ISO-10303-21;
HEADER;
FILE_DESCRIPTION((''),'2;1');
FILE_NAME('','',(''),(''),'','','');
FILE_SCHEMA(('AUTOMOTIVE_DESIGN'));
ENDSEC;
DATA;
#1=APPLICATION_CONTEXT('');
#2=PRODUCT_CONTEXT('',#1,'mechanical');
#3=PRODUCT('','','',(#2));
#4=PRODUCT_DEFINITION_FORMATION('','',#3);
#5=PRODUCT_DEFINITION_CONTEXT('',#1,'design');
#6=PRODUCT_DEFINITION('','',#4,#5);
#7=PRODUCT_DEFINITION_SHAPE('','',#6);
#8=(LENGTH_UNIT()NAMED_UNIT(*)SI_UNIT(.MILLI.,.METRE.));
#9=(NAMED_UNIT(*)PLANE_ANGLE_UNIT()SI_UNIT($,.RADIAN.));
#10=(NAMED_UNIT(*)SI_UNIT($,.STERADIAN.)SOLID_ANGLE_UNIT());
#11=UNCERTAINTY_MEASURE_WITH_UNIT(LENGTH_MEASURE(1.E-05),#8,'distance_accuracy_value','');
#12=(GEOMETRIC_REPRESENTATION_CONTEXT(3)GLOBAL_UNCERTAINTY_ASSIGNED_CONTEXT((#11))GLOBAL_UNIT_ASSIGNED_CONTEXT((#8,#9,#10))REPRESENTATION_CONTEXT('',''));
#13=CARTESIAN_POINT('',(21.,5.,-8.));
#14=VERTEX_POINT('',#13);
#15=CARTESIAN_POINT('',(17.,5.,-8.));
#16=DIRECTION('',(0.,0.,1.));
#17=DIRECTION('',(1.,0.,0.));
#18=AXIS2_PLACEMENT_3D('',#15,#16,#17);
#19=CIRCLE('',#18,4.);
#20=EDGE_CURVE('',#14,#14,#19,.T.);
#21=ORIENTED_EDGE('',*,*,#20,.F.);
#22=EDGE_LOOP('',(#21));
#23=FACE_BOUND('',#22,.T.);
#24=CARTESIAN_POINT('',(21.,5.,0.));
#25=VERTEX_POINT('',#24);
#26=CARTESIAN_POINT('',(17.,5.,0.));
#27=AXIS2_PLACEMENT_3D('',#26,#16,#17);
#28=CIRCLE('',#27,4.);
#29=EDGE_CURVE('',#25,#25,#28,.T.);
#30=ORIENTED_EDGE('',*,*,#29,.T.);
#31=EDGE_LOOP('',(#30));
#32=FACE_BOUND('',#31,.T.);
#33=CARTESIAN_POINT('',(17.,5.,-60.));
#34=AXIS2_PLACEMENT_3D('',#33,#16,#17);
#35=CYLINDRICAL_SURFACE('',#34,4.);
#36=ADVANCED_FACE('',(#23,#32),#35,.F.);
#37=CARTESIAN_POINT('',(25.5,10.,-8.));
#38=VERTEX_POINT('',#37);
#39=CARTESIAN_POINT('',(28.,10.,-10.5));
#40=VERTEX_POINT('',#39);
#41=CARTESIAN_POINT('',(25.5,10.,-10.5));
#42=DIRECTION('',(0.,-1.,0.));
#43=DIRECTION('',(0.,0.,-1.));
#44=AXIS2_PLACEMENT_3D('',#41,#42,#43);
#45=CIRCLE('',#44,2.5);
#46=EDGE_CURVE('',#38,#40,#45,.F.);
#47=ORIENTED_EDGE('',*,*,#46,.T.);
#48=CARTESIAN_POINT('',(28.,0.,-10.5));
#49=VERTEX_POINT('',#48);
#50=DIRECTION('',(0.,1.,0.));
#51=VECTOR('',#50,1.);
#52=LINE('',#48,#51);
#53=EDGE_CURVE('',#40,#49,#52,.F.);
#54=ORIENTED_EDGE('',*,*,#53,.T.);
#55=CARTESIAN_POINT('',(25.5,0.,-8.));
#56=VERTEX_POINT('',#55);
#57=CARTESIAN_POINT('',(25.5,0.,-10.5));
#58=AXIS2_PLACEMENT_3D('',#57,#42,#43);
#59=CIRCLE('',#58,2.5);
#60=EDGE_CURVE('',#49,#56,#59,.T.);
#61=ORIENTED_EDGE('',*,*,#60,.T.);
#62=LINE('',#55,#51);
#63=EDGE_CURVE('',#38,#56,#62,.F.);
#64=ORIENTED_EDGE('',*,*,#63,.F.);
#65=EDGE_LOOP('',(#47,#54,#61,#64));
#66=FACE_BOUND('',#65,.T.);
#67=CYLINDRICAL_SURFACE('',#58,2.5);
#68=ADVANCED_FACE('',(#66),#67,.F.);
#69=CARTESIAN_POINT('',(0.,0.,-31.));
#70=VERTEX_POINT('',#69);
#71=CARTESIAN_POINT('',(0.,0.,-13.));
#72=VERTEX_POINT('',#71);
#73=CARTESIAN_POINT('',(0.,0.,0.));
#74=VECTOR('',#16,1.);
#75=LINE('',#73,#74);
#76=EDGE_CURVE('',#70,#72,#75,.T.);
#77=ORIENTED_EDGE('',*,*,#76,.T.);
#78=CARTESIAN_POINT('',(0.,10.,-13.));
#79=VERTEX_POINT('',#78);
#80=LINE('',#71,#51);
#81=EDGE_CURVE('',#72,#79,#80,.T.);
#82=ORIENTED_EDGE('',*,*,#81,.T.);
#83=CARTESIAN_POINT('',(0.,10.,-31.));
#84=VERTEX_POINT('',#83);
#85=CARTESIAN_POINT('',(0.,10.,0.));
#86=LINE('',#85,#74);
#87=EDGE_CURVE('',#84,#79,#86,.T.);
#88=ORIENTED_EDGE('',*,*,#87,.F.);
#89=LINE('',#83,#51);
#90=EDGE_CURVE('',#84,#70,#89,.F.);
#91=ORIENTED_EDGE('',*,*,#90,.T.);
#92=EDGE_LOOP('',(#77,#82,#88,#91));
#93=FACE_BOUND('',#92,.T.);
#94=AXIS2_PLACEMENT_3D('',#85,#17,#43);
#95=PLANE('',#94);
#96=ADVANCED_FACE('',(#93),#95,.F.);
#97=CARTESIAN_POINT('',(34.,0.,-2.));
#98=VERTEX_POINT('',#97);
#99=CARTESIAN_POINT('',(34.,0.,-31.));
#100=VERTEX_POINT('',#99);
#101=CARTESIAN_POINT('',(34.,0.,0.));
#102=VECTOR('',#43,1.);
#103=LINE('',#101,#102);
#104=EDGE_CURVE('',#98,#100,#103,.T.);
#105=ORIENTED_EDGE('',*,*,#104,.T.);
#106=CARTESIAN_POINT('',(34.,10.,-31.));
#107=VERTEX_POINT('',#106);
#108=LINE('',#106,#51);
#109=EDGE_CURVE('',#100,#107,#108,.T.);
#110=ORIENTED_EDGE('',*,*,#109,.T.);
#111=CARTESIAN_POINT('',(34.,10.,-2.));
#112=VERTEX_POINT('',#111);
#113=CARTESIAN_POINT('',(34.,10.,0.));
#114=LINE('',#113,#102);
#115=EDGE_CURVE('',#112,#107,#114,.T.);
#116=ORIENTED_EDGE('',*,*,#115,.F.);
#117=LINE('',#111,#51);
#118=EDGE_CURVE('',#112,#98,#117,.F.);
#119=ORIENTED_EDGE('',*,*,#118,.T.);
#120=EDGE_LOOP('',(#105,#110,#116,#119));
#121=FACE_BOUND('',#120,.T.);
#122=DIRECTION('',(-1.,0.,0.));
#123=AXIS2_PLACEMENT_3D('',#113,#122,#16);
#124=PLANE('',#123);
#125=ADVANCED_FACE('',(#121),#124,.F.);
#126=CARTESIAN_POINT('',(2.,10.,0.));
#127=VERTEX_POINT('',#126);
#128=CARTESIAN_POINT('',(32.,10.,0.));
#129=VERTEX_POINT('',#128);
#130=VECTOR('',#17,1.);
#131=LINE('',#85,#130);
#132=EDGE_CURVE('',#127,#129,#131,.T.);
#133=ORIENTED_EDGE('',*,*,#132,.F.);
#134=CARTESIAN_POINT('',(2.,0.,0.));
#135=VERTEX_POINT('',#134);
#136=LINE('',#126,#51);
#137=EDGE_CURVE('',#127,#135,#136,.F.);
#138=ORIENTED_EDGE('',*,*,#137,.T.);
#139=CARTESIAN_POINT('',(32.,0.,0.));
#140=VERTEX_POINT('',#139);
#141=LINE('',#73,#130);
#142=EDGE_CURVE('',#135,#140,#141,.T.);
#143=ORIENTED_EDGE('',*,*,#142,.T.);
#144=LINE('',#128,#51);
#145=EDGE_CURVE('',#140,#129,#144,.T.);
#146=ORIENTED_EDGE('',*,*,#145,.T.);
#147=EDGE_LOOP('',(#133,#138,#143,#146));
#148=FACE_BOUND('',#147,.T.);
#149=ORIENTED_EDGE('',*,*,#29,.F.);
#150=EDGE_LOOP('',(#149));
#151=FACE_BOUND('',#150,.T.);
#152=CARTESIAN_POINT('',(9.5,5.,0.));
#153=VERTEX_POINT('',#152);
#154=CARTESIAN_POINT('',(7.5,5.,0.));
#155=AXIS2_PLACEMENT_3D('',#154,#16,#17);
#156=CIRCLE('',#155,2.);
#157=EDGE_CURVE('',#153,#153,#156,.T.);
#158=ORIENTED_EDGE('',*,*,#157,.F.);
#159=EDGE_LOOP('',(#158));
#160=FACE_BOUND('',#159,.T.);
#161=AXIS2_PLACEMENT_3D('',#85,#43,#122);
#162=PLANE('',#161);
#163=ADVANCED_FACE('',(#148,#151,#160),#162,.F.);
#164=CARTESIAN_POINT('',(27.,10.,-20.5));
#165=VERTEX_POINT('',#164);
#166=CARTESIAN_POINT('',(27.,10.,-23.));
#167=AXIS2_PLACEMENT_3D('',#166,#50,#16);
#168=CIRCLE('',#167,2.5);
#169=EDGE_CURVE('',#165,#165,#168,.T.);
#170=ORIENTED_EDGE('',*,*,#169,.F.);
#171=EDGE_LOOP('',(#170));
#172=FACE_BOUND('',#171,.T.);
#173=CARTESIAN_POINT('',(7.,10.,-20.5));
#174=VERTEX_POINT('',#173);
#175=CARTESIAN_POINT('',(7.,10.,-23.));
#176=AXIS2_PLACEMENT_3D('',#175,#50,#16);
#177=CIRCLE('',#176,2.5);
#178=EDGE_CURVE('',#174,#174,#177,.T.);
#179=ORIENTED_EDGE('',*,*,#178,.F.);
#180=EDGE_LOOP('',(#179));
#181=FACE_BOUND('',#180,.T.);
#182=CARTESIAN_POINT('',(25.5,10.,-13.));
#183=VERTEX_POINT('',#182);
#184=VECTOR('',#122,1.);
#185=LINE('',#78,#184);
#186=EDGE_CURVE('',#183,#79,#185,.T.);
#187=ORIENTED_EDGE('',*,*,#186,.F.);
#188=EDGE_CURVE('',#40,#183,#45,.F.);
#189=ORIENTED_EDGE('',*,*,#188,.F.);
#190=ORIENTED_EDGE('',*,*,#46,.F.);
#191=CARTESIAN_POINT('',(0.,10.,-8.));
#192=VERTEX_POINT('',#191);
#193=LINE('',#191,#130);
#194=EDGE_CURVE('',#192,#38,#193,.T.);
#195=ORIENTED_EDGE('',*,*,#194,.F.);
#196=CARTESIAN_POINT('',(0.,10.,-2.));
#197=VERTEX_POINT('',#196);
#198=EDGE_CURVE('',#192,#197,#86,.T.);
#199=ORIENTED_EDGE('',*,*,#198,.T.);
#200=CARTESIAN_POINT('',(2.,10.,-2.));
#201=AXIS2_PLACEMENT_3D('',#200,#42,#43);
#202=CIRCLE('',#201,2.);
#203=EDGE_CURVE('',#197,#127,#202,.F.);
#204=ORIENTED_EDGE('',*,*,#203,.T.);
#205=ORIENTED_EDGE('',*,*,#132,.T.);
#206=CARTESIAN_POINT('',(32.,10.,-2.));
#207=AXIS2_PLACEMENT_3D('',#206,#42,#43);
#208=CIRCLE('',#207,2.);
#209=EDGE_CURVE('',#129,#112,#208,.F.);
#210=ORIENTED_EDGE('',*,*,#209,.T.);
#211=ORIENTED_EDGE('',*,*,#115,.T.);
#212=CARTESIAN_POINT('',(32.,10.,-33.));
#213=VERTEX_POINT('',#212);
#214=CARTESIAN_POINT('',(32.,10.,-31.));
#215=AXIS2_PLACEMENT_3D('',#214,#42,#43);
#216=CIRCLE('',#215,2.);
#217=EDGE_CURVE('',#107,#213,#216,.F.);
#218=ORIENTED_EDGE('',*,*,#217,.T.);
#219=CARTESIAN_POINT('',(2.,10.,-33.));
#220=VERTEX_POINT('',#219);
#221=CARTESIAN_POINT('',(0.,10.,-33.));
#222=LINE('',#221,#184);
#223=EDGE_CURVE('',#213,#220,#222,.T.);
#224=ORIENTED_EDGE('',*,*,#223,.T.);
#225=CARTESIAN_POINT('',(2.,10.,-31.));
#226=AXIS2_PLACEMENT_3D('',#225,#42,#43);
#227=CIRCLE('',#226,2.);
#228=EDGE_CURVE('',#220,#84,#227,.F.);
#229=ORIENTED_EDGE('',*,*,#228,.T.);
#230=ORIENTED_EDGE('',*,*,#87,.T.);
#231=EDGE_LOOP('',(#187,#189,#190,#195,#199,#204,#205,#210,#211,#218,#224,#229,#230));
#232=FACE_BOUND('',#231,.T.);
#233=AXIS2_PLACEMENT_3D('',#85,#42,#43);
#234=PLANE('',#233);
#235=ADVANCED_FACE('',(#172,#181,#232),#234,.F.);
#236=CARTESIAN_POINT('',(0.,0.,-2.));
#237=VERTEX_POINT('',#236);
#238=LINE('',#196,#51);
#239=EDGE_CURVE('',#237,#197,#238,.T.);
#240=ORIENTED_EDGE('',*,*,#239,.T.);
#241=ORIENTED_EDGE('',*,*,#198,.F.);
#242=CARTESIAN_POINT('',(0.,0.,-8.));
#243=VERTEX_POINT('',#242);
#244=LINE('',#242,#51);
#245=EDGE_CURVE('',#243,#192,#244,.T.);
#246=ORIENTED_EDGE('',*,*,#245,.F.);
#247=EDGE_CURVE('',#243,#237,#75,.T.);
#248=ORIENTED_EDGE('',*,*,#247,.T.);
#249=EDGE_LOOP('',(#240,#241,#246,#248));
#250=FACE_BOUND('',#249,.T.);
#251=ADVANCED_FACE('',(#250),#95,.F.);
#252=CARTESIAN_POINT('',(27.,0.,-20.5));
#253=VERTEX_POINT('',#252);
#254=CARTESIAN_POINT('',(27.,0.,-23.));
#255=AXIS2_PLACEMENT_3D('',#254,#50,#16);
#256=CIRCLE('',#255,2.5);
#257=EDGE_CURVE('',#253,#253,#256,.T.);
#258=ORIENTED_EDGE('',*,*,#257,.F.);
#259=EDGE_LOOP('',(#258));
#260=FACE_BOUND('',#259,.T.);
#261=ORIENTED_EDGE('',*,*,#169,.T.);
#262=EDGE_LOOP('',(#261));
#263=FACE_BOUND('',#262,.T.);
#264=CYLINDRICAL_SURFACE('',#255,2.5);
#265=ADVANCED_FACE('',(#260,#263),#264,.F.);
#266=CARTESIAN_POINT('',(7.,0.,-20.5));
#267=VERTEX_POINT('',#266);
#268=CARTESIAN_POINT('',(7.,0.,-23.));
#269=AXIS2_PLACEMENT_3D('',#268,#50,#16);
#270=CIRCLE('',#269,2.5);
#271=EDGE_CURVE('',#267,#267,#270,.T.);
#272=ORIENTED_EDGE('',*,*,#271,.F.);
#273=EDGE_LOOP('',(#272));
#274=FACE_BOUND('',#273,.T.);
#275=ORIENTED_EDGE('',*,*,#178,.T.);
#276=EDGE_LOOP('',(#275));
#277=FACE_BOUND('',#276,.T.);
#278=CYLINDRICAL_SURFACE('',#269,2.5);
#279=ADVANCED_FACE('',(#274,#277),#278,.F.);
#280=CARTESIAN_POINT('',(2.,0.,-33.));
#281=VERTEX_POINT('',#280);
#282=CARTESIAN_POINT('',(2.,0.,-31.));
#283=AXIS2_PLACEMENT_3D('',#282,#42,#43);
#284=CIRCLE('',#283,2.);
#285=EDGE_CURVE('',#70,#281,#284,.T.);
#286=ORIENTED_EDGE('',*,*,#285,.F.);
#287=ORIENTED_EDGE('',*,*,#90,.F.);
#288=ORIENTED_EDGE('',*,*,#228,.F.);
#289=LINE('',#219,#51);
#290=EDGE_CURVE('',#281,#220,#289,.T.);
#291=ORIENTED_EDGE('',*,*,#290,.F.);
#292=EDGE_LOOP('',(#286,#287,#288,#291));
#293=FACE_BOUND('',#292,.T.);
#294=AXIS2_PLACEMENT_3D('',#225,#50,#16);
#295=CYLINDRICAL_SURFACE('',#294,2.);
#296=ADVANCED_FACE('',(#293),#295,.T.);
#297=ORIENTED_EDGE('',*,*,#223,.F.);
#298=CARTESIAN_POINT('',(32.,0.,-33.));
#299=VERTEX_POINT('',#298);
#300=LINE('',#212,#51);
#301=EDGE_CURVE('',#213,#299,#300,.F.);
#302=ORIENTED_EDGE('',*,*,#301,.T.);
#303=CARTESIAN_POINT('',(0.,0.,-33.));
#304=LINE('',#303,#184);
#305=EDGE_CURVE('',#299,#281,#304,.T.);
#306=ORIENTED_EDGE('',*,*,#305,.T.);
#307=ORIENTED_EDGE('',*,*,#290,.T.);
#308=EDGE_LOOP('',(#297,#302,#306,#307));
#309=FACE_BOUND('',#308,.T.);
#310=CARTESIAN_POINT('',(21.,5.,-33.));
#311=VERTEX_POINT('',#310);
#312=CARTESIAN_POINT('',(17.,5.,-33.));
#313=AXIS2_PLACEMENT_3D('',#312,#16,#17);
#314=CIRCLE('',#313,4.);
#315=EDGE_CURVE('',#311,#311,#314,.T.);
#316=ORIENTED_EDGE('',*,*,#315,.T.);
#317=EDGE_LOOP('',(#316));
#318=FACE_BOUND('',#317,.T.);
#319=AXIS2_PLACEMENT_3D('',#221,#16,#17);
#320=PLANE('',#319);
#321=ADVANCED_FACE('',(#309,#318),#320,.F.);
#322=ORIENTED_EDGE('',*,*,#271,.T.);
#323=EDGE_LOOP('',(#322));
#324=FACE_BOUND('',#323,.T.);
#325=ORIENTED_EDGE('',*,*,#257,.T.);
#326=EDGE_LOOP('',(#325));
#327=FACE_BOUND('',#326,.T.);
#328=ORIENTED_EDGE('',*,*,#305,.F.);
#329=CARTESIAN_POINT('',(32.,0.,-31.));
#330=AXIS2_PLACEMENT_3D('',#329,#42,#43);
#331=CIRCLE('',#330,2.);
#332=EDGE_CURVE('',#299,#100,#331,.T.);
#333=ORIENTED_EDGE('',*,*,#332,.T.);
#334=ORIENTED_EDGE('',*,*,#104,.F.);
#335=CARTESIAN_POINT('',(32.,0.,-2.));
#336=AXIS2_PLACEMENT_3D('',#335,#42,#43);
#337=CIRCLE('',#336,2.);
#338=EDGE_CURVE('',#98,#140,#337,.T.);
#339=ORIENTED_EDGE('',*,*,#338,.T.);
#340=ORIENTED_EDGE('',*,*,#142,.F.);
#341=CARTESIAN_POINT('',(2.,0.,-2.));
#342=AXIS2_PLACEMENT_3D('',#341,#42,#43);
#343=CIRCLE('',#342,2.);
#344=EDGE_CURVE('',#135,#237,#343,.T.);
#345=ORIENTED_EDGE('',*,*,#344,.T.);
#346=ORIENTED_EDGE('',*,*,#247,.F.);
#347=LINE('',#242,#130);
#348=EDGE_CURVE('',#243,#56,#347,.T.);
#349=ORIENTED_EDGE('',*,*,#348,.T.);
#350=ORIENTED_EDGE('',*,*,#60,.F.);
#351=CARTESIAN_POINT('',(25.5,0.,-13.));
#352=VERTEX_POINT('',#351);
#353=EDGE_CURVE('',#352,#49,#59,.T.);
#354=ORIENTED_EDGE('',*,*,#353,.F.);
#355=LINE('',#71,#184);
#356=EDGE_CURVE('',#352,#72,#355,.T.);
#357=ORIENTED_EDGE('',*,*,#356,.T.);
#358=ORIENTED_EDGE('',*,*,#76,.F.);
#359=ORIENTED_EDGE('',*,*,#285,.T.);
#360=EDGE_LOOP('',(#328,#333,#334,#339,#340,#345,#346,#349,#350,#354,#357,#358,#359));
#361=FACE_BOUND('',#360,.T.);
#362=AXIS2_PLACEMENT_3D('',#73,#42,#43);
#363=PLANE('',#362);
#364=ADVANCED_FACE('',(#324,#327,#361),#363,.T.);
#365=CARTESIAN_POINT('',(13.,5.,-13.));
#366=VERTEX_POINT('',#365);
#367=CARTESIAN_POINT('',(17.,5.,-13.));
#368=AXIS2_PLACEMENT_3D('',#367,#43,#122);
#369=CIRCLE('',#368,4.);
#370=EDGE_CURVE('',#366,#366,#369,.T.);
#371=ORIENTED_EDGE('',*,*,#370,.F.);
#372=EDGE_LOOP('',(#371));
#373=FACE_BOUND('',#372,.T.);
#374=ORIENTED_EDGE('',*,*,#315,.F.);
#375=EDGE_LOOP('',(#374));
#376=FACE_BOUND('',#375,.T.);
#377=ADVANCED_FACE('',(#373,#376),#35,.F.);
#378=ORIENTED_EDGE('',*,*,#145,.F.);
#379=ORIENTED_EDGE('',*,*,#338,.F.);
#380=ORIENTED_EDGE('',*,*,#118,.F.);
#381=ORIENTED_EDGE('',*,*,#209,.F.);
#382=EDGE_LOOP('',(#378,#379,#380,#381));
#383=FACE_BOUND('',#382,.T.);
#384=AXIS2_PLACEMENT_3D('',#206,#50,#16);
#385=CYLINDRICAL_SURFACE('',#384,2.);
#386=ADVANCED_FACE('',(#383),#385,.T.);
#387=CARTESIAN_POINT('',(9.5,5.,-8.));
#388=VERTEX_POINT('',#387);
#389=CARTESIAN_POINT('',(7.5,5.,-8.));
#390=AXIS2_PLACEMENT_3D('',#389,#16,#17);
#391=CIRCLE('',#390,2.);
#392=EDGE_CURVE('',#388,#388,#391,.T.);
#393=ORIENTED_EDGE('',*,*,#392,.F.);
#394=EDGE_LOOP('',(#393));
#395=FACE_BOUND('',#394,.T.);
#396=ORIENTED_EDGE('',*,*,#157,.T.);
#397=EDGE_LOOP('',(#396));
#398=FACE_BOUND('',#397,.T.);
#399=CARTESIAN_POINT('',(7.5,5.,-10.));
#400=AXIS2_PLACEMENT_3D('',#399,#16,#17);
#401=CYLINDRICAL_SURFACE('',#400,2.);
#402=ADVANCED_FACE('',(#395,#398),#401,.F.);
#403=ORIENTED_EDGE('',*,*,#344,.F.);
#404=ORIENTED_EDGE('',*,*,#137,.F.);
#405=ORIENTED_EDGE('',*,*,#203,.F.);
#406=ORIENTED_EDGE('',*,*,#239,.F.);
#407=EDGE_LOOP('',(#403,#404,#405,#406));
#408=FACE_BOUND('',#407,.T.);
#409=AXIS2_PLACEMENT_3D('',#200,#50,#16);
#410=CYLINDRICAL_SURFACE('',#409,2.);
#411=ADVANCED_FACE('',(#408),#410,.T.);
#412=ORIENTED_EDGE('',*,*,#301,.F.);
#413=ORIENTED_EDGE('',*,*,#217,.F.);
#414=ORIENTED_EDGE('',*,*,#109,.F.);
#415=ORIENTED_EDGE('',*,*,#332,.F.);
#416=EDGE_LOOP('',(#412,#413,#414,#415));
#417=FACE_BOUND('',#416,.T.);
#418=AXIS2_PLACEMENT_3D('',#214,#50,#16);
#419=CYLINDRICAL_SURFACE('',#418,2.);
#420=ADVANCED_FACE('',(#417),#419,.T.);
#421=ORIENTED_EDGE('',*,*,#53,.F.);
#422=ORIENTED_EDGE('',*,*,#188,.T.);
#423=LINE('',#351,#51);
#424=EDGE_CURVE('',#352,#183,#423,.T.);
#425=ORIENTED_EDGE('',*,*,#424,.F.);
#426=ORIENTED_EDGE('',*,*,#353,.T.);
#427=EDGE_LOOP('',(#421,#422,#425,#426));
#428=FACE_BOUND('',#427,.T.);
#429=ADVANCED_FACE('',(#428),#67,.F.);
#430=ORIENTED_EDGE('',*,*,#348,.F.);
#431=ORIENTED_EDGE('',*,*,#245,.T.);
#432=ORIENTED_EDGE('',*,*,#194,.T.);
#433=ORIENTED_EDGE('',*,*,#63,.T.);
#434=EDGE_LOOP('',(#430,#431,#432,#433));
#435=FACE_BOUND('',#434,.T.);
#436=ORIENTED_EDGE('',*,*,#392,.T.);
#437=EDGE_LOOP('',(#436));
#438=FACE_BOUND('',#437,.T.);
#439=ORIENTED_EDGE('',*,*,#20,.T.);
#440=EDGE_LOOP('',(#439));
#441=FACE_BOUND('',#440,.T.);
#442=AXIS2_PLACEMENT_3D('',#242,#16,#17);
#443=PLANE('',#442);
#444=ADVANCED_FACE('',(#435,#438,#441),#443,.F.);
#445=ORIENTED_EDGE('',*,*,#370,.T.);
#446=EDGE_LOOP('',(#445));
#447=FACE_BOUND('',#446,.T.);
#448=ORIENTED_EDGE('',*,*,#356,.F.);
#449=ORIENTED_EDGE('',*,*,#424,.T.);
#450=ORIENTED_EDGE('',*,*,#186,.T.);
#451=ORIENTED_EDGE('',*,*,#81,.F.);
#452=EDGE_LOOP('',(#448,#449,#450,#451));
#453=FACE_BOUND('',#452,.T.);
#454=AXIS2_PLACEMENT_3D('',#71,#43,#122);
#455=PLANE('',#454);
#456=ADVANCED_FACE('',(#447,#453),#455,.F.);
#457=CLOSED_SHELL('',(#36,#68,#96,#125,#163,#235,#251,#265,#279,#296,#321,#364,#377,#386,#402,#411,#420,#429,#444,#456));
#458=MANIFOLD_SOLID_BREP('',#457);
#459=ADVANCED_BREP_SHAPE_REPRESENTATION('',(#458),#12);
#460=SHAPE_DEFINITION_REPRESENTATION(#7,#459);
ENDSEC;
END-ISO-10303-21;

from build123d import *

# Parameters (mm, degrees)
SKETCH2_W           = 34
SKETCH2_H           = 33
BOSS_EXTRUDE1_DEPTH = 10
FILLET1_R           = 2
FILLET2_R           = 2
FILLET3_R           = 2
FILLET4_R           = 2
SKETCH3_R           = 2.5
CUT_EXTRUDE1_DEPTH  = 10
SKETCH4_W           = 28
SKETCH4_H           = 5
CUT_EXTRUDE2_DEPTH  = 10
FILLET5_R           = 2.5
FILLET6_R           = 2.5
SKETCH5_R           = 4
CUT_EXTRUDE3_DEPTH  = 60
SKETCH6_R           = 2
CUT_EXTRUDE4_DEPTH  = 10


with BuildPart() as part:
    # Sketch2 → Boss-Extrude1 (new body)
    with BuildSketch(Plane(origin=(0, 0, 0), x_dir=(1, 0, 0), z_dir=(0, 1, 0))):
        with Locations((17, 16.5)):
            Rectangle(SKETCH2_W, SKETCH2_H)
    extrude(amount=BOSS_EXTRUDE1_DEPTH)

    # Fillet1
    fillet1_edges = [part.edges().sort_by_distance(p)[0] for p in [
        (34, 5, 0),
    ]]
    fillet(fillet1_edges, radius=FILLET1_R)

    # Fillet2
    fillet2_edges = [part.edges().sort_by_distance(p)[0] for p in [
        (34, 5, -33),
    ]]
    fillet(fillet2_edges, radius=FILLET2_R)

    # Fillet3
    fillet3_edges = [part.edges().sort_by_distance(p)[0] for p in [
        (0, 5, -33),
    ]]
    fillet(fillet3_edges, radius=FILLET3_R)

    # Fillet4
    fillet4_edges = [part.edges().sort_by_distance(p)[0] for p in [
        (0, 5, 0),
    ]]
    fillet(fillet4_edges, radius=FILLET4_R)

    # Sketch3 → Cut-Extrude1 (cut)
    with BuildSketch(Plane(origin=(0, 10, 0), x_dir=(1, 0, 0), z_dir=(0, 1, 0))):
        with Locations(Location((7, 23, 0), (0, 0, 270))):
            Circle(SKETCH3_R)
        with Locations(Location((27, 23, 0), (0, 0, 270))):
            Circle(SKETCH3_R)
    extrude(amount=-CUT_EXTRUDE1_DEPTH, mode=Mode.SUBTRACT)

    # Sketch4 → Cut-Extrude2 (cut)
    with BuildSketch(Plane(origin=(0, 10, 0), x_dir=(1, 0, 0), z_dir=(0, 1, 0))):
        with Locations((14, 10.5)):
            Rectangle(SKETCH4_W, SKETCH4_H)
    extrude(amount=-CUT_EXTRUDE2_DEPTH, mode=Mode.SUBTRACT)

    # Fillet5
    fillet5_edges = [part.edges().sort_by_distance(p)[0] for p in [
        (28, 5, -13),
    ]]
    fillet(fillet5_edges, radius=FILLET5_R)

    # Fillet6
    fillet6_edges = [part.edges().sort_by_distance(p)[0] for p in [
        (28, 5, -8),
    ]]
    fillet(fillet6_edges, radius=FILLET6_R - 0.0001)  # a hair under: the kernel refuses the full size

    # Sketch5 → Cut-Extrude3 (cut)
    with BuildSketch(Plane.XY):
        with Locations((17, 5)):
            Circle(SKETCH5_R)
    extrude(amount=-CUT_EXTRUDE3_DEPTH, mode=Mode.SUBTRACT)

    # Sketch6 → Cut-Extrude4 (cut)
    with BuildSketch(Plane.XY):
        with Locations((7.5, 5)):
            Circle(SKETCH6_R)
    extrude(amount=-CUT_EXTRUDE4_DEPTH, mode=Mode.SUBTRACT)


solid = part.part
